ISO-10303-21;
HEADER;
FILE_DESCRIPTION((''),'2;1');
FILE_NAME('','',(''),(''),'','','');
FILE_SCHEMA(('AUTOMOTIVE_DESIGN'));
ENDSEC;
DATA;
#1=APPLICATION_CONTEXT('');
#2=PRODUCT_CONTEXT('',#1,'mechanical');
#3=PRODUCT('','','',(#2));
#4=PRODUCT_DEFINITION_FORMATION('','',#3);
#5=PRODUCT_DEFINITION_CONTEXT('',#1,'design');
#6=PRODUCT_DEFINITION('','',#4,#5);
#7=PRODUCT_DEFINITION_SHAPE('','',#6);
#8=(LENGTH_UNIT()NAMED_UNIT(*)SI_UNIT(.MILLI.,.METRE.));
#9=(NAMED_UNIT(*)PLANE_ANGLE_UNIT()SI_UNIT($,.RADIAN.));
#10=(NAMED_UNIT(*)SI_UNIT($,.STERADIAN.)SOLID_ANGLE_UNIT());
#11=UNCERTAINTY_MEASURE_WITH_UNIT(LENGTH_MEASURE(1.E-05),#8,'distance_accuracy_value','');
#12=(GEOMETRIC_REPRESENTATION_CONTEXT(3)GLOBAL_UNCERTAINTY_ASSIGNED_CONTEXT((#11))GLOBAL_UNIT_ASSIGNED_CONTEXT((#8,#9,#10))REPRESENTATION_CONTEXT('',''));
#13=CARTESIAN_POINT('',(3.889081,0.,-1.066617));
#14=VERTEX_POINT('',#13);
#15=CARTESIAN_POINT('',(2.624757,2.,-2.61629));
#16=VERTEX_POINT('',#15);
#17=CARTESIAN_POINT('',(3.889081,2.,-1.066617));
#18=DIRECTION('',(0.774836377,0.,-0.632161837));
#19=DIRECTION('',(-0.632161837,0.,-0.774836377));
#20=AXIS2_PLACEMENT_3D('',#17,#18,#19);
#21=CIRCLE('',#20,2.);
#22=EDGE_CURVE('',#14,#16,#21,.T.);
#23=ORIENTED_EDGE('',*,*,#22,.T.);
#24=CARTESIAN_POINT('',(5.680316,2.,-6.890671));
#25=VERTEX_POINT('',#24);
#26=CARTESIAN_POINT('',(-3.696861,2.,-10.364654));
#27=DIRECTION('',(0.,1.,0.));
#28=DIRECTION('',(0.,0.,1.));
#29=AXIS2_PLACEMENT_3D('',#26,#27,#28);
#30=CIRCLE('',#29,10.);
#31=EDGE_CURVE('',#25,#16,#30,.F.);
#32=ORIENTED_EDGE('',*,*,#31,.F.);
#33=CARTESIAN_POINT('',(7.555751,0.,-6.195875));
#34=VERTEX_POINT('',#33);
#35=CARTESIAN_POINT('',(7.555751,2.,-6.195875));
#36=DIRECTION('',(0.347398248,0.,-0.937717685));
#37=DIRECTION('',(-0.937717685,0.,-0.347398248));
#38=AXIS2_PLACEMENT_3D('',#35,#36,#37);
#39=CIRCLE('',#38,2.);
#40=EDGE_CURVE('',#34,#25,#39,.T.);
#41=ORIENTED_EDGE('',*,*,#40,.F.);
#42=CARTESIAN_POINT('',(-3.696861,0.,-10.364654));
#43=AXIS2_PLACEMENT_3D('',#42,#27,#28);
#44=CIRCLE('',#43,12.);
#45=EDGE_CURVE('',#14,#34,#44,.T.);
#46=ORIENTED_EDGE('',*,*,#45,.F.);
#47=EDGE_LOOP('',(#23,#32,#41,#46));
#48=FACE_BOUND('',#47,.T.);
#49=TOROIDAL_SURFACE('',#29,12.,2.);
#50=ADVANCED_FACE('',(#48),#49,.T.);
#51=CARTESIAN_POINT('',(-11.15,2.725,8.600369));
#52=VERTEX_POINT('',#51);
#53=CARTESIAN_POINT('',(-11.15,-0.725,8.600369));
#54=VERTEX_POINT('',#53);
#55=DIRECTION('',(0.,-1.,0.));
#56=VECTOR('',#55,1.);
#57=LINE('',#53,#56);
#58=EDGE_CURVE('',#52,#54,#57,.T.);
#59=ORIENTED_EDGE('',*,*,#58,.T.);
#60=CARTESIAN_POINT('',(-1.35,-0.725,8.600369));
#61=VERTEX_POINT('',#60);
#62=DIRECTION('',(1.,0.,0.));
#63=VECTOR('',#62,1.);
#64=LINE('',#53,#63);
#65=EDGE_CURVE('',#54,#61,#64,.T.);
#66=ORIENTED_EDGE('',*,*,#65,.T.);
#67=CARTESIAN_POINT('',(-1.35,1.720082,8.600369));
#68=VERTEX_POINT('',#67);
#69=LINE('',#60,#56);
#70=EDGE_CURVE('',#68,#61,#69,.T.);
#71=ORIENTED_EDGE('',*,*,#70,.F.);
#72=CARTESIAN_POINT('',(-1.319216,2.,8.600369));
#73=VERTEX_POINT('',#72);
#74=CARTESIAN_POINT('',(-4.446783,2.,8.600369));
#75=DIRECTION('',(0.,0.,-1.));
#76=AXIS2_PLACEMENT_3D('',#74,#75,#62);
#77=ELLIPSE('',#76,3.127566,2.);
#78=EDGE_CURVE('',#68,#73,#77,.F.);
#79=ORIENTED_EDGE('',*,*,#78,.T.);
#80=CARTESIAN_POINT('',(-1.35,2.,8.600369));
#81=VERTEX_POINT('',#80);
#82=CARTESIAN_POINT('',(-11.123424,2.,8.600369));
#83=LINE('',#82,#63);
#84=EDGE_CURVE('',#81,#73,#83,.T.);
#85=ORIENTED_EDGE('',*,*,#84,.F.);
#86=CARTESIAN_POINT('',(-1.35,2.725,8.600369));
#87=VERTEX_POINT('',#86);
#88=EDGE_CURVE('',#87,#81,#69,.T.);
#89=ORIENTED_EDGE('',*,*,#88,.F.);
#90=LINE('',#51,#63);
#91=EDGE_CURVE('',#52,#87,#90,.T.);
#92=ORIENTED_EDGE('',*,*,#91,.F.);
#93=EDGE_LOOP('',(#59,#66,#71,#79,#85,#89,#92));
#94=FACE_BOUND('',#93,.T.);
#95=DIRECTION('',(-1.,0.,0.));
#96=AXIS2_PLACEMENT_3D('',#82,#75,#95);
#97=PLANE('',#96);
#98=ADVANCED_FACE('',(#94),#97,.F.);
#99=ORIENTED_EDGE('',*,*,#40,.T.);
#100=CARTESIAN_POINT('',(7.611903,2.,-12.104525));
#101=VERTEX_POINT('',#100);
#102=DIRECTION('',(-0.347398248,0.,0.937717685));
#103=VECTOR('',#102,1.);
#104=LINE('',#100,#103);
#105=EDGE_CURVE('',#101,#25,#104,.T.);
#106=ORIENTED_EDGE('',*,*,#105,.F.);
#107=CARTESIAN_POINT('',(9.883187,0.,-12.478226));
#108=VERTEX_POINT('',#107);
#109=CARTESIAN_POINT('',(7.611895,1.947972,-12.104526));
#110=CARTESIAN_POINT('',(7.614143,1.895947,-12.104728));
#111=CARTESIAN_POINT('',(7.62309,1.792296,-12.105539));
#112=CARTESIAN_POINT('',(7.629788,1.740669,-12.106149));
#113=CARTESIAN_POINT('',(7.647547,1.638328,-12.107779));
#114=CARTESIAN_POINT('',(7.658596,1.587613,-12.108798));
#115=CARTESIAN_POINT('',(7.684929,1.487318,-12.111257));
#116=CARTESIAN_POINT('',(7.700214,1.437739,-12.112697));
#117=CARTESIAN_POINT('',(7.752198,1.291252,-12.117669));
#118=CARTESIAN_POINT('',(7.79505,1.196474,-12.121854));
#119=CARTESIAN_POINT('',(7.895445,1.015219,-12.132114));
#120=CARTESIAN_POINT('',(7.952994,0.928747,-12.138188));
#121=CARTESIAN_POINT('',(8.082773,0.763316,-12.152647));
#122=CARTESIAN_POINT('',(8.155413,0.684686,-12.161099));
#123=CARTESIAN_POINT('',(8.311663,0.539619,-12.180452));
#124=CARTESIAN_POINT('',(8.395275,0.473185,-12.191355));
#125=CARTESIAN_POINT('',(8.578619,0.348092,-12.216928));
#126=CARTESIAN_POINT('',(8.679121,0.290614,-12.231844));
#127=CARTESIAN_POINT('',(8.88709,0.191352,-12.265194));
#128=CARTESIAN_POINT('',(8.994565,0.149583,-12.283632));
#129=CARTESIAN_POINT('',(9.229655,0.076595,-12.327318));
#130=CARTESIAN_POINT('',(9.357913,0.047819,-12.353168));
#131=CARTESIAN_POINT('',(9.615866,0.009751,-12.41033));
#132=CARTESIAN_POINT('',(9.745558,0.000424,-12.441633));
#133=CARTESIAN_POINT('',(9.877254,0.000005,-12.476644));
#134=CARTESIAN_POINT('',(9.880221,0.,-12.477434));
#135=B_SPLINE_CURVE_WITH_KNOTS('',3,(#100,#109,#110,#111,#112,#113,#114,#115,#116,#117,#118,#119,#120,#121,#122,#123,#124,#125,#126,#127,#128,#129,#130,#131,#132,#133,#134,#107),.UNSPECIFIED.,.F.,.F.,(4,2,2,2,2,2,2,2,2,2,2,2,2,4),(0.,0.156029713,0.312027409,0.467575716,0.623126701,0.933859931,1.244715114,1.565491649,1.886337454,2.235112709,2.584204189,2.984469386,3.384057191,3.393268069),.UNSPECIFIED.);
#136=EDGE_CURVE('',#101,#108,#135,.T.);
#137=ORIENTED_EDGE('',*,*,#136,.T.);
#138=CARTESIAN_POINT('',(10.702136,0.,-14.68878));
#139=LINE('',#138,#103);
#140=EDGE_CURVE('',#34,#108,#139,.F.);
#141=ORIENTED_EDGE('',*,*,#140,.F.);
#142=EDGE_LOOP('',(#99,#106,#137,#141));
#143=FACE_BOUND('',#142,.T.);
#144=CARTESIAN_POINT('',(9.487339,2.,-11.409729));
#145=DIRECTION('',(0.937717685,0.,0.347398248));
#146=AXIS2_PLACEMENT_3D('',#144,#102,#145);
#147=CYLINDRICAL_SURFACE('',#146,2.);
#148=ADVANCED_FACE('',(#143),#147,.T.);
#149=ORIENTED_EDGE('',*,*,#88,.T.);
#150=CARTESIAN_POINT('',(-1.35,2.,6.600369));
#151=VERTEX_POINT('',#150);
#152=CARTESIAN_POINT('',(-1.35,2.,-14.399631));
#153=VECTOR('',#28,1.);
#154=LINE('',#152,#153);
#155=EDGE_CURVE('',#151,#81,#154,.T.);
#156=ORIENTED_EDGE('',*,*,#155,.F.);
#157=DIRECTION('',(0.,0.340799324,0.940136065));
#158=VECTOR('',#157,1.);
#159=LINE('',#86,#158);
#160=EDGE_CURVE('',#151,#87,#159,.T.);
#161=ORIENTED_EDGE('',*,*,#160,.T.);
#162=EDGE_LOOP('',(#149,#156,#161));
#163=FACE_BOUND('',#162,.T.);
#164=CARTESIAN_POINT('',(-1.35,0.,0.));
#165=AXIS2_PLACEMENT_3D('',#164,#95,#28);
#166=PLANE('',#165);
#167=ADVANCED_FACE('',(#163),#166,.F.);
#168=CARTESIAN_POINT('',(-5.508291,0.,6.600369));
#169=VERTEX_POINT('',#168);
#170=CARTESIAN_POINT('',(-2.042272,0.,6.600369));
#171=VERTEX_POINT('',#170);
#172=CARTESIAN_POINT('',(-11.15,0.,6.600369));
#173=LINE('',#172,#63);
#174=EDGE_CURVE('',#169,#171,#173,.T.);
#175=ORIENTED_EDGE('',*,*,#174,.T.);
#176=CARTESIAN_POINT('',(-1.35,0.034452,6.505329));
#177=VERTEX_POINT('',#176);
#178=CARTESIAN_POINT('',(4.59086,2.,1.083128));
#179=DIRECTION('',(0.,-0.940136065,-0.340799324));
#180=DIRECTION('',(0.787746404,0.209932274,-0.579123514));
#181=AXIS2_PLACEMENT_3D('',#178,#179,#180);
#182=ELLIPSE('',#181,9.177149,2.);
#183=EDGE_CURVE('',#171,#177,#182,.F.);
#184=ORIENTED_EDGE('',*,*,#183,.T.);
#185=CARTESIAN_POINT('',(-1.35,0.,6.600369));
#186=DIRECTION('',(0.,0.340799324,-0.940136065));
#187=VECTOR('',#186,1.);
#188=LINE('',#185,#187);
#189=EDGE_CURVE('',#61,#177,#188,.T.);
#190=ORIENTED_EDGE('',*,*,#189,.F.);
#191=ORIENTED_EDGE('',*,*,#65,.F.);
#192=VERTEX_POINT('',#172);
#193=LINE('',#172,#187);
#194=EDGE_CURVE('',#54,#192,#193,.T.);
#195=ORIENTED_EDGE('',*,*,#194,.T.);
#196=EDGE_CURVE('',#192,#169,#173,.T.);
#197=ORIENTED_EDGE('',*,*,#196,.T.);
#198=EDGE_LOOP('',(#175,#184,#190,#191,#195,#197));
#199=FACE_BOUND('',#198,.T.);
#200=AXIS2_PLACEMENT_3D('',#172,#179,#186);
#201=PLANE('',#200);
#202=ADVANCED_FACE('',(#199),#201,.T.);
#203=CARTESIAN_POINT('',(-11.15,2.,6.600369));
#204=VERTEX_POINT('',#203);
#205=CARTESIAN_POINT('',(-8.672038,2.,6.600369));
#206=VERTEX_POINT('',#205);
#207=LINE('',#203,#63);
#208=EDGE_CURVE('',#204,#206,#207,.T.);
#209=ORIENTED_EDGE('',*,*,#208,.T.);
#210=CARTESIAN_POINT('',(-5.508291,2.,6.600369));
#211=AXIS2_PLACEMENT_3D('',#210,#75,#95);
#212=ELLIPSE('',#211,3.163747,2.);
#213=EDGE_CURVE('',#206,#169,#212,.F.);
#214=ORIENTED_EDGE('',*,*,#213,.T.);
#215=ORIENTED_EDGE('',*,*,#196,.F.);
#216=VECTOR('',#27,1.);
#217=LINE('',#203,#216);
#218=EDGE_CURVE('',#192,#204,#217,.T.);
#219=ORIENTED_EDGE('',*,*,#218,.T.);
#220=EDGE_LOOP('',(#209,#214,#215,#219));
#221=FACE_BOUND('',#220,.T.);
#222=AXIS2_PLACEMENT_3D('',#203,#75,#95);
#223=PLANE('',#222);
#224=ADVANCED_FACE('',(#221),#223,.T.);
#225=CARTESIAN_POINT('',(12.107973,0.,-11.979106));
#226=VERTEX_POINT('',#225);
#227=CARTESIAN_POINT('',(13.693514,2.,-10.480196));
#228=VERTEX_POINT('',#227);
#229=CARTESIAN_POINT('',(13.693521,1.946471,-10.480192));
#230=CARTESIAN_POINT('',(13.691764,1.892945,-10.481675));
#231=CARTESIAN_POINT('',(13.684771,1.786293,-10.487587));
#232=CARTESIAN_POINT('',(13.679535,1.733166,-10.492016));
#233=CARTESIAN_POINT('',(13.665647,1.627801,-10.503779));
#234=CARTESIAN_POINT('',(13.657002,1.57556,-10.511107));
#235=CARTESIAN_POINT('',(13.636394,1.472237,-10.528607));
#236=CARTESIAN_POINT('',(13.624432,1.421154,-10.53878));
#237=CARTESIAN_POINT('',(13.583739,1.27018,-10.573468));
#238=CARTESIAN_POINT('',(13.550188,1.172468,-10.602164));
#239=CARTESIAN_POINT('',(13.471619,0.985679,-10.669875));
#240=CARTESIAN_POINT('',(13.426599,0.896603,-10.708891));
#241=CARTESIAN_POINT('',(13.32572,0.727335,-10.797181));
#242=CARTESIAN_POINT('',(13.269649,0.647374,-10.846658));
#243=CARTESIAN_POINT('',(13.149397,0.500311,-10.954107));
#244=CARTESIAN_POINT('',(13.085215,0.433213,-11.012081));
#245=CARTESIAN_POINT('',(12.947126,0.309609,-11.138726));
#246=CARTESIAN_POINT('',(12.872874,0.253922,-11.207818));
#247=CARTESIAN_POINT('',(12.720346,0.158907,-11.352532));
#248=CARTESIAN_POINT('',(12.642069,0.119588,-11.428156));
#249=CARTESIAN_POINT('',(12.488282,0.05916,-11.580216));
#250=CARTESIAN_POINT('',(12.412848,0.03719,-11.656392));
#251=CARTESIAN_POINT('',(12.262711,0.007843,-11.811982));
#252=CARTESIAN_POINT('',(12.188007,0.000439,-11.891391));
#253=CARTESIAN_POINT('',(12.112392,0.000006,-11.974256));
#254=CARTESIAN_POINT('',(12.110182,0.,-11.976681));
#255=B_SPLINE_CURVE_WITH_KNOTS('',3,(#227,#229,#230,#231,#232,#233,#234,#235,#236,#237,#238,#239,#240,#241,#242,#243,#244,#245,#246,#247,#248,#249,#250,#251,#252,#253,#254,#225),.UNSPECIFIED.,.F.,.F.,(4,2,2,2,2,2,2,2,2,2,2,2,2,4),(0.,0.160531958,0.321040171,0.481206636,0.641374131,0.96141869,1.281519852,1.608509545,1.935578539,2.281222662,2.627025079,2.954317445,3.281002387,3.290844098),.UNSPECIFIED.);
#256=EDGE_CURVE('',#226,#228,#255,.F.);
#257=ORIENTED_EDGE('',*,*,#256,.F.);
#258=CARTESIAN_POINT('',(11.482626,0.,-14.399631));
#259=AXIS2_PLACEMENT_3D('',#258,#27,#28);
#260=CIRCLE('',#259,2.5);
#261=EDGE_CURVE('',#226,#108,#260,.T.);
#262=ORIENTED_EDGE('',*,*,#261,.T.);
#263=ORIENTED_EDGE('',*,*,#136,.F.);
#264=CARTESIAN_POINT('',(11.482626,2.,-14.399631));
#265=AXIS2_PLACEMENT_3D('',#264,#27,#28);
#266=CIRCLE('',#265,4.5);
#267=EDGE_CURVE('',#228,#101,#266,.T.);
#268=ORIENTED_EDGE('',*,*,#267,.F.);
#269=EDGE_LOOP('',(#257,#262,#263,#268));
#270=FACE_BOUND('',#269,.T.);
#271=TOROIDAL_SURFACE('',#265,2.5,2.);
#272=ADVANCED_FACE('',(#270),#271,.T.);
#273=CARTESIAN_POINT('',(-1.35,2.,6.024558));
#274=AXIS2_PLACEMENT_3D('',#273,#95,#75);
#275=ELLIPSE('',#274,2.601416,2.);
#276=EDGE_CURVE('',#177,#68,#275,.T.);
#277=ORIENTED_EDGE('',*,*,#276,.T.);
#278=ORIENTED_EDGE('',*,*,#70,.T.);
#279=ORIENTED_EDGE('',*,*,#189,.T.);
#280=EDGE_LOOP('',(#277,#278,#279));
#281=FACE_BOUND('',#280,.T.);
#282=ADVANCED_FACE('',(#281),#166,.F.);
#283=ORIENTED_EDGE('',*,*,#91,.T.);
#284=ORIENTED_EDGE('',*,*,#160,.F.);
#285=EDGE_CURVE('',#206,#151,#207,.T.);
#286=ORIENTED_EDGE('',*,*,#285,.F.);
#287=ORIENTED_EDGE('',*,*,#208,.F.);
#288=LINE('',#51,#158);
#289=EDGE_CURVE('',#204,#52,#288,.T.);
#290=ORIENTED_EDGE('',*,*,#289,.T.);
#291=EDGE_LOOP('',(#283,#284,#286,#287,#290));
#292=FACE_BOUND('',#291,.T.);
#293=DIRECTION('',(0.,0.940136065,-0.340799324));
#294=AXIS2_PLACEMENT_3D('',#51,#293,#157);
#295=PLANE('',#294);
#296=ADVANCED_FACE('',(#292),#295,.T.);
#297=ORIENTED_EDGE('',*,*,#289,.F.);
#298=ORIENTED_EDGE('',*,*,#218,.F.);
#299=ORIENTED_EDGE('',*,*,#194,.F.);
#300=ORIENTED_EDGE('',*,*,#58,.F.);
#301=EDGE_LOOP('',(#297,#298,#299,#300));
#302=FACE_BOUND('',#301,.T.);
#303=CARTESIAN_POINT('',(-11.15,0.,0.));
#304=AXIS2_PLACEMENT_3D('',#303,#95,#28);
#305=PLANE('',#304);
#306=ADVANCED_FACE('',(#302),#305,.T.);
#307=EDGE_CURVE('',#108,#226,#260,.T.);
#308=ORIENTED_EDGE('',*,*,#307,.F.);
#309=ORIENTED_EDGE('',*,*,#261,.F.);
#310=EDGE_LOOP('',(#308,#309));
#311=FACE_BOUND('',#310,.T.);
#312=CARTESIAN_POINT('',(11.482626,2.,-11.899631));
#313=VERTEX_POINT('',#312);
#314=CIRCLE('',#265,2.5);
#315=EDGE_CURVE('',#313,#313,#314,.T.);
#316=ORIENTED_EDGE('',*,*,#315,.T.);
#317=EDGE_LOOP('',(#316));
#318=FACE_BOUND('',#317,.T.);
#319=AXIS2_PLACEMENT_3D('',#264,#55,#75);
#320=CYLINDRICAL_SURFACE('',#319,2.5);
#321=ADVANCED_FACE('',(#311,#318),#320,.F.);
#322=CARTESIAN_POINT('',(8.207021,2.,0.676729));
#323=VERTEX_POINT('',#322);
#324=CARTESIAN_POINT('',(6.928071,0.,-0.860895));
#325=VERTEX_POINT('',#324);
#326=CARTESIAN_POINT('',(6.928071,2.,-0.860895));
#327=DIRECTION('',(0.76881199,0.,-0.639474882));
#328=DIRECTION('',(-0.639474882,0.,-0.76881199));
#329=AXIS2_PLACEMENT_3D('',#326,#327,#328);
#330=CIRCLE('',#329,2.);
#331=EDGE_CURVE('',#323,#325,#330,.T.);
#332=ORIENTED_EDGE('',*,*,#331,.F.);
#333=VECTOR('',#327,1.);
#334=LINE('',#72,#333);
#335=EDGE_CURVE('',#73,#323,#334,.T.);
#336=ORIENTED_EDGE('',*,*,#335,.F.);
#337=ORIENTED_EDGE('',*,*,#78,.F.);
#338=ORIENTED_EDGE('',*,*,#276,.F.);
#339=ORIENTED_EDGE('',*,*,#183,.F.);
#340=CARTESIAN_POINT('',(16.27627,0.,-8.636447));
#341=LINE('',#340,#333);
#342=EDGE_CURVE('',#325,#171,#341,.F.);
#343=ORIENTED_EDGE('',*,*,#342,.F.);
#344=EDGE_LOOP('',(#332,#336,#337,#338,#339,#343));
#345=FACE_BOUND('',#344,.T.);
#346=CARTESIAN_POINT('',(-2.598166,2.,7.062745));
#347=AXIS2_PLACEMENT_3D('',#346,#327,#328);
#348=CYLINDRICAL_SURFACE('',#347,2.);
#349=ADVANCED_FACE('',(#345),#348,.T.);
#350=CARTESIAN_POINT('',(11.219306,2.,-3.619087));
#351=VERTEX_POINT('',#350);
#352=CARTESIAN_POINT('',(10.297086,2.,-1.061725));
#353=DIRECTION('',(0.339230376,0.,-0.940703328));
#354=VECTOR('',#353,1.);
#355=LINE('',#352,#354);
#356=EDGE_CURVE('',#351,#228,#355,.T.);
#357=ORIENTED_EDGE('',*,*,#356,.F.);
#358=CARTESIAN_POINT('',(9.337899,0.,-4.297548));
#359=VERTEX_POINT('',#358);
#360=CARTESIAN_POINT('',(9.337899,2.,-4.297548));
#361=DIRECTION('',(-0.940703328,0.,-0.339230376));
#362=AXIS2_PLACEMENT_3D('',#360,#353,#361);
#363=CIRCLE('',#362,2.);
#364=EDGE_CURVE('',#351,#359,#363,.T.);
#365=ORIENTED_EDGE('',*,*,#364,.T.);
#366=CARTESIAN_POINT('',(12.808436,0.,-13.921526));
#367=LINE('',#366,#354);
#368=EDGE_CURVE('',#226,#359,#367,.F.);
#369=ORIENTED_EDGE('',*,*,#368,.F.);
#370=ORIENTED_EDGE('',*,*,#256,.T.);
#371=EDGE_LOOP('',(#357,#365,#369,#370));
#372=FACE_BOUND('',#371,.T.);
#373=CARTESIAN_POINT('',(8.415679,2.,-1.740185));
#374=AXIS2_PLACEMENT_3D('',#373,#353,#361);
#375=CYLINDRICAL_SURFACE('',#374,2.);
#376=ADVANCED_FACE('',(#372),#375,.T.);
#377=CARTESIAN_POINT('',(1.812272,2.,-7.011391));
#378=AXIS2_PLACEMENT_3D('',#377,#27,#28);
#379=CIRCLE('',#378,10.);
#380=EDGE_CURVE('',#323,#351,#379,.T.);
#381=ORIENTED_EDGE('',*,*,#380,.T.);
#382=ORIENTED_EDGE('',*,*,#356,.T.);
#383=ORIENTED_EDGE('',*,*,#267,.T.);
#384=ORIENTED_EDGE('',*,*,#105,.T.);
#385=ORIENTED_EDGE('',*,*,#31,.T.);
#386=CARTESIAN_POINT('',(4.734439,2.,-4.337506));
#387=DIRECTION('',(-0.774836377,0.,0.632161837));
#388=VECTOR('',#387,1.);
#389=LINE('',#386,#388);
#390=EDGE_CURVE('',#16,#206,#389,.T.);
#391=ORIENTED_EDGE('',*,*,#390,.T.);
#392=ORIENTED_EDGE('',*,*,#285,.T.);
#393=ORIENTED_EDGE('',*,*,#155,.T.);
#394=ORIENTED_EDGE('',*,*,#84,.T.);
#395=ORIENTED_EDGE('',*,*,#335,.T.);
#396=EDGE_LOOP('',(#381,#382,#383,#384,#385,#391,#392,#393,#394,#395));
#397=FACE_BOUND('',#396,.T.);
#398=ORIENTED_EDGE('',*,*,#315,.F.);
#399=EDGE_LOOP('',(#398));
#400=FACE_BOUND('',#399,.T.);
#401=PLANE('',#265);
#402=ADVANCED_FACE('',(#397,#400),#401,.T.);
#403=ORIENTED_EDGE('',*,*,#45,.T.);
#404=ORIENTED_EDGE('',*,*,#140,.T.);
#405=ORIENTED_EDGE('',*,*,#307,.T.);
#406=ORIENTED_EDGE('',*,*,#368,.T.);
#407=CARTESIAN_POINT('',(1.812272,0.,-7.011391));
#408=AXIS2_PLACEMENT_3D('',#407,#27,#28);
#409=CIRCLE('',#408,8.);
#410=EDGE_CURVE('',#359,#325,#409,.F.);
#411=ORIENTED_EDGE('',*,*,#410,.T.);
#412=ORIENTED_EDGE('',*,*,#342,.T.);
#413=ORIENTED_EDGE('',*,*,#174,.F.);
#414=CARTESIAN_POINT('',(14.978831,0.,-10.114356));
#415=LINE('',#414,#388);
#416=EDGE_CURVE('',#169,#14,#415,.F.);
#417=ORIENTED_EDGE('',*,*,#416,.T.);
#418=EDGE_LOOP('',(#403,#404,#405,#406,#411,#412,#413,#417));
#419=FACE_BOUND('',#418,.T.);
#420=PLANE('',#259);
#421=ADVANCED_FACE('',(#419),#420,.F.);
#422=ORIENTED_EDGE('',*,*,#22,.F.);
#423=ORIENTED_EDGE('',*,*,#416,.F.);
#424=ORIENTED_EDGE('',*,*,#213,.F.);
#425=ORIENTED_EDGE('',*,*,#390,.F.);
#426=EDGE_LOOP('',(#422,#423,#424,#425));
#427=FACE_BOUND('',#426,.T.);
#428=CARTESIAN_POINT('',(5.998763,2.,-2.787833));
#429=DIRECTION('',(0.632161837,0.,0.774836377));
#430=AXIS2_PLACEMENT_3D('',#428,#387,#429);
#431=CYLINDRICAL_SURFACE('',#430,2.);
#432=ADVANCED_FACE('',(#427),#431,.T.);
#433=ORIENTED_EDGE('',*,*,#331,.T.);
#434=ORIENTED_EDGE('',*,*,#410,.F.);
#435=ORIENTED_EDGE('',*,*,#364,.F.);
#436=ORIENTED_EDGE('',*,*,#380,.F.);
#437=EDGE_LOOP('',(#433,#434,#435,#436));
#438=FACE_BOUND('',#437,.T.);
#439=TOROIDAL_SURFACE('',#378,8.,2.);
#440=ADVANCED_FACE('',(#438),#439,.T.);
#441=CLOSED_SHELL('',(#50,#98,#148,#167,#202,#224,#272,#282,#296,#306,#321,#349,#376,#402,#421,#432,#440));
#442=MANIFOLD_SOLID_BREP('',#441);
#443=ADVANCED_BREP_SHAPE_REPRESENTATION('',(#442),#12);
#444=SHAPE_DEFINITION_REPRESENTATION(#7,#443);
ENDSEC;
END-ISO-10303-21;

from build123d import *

# Parameters (mm, degrees)
SKETCH1_R                = 2.5
BOSS_EXTRUDE1_DEPTH      = 2
FILLET1_R                = 10
FILLET2_R                = 10
BOSS_EXTRUDE2_DEPTH      = 5.3
BOSS_EXTRUDE2_DEPTH_BACK = 4.5
FILLET7_R                = 2
FILLET8_R                = 2


with BuildPart() as part:
    # Sketch1 → Boss-Extrude1 (new body)
    with BuildSketch(Plane(origin=(0, 0, 0), x_dir=(1, 0, 0), z_dir=(0, 1, 0))):
        with BuildLine():
            Line((4.734439188, 4.337505525), (-11.123424173, -8.60036928))
            Line((-11.123424173, -8.60036928), (-1.31921636, -8.60036928))
            Line((-1.31921636, -8.60036928), (10.297086052, 1.061724594))
            Line((10.297086052, 1.061724594), (13.693514413, 10.480195617))
            ThreePointArc((13.693514413, 10.480195617), (12.643820806, 18.747230765), (7.611903427, 12.10452542))
            Line((7.611903427, 12.10452542), (4.734439188, 4.337505525))
        make_face()
        with Locations(Location((11.482625797, 14.39963072, 0), (0, 0, 270))):
            Circle(SKETCH1_R, mode=Mode.SUBTRACT)
    extrude(amount=BOSS_EXTRUDE1_DEPTH)

    # Fillet1
    fillet1_edges = [part.edges().sort_by_distance(p)[0] for p in [
        (10.297086052, 1, -1.061724594),
    ]]
    fillet(fillet1_edges, radius=FILLET1_R)

    # Fillet2
    fillet2_edges = [part.edges().sort_by_distance(p)[0] for p in [
        (4.734439188, 1, -4.337505525),
    ]]
    fillet(fillet2_edges, radius=FILLET2_R)

    # Sketch6 → Boss-Extrude2 (add, two sides: drawn at the far end of the back side and taken through both)
    with BuildSketch(Plane(origin=(-6.65, 0, 0), x_dir=(0, 0, -1), z_dir=(1, 0, 0)).offset(-BOSS_EXTRUDE2_DEPTH_BACK)):
        Polygon((-8.60036928, 2.725), (-6.60036928, 2), (-6.60036928, 0), (-8.60036928, -0.725), align=None)
    extrude(amount=BOSS_EXTRUDE2_DEPTH + BOSS_EXTRUDE2_DEPTH_BACK)

    # Fillet7
    fillet7_edges = [part.edges().sort_by_distance(p)[0] for p in [
        (6.646109692, 0, -9.497598443),
        (4.438286722, 0, -4.549211293),
        (-3.023640286, 0, 1.992039552),
        (12.456410034, 0, -7.049641368),
        (9.999920903, 0, -1.270100821),
        (3.443902415, 0, 4.638549149),
    ]]
    fillet(fillet7_edges, radius=FILLET7_R - 0.0001)  # a hair under: the kernel refuses the full size

    # Fillet8
    fillet8_edges = [part.edges().sort_by_distance(p)[0] for p in [
        (12.744313914, 0, -18.719137995),
    ]]
    fillet(fillet8_edges, radius=FILLET8_R - 0.0001)  # a hair under: the kernel refuses the full size


solid = part.part
